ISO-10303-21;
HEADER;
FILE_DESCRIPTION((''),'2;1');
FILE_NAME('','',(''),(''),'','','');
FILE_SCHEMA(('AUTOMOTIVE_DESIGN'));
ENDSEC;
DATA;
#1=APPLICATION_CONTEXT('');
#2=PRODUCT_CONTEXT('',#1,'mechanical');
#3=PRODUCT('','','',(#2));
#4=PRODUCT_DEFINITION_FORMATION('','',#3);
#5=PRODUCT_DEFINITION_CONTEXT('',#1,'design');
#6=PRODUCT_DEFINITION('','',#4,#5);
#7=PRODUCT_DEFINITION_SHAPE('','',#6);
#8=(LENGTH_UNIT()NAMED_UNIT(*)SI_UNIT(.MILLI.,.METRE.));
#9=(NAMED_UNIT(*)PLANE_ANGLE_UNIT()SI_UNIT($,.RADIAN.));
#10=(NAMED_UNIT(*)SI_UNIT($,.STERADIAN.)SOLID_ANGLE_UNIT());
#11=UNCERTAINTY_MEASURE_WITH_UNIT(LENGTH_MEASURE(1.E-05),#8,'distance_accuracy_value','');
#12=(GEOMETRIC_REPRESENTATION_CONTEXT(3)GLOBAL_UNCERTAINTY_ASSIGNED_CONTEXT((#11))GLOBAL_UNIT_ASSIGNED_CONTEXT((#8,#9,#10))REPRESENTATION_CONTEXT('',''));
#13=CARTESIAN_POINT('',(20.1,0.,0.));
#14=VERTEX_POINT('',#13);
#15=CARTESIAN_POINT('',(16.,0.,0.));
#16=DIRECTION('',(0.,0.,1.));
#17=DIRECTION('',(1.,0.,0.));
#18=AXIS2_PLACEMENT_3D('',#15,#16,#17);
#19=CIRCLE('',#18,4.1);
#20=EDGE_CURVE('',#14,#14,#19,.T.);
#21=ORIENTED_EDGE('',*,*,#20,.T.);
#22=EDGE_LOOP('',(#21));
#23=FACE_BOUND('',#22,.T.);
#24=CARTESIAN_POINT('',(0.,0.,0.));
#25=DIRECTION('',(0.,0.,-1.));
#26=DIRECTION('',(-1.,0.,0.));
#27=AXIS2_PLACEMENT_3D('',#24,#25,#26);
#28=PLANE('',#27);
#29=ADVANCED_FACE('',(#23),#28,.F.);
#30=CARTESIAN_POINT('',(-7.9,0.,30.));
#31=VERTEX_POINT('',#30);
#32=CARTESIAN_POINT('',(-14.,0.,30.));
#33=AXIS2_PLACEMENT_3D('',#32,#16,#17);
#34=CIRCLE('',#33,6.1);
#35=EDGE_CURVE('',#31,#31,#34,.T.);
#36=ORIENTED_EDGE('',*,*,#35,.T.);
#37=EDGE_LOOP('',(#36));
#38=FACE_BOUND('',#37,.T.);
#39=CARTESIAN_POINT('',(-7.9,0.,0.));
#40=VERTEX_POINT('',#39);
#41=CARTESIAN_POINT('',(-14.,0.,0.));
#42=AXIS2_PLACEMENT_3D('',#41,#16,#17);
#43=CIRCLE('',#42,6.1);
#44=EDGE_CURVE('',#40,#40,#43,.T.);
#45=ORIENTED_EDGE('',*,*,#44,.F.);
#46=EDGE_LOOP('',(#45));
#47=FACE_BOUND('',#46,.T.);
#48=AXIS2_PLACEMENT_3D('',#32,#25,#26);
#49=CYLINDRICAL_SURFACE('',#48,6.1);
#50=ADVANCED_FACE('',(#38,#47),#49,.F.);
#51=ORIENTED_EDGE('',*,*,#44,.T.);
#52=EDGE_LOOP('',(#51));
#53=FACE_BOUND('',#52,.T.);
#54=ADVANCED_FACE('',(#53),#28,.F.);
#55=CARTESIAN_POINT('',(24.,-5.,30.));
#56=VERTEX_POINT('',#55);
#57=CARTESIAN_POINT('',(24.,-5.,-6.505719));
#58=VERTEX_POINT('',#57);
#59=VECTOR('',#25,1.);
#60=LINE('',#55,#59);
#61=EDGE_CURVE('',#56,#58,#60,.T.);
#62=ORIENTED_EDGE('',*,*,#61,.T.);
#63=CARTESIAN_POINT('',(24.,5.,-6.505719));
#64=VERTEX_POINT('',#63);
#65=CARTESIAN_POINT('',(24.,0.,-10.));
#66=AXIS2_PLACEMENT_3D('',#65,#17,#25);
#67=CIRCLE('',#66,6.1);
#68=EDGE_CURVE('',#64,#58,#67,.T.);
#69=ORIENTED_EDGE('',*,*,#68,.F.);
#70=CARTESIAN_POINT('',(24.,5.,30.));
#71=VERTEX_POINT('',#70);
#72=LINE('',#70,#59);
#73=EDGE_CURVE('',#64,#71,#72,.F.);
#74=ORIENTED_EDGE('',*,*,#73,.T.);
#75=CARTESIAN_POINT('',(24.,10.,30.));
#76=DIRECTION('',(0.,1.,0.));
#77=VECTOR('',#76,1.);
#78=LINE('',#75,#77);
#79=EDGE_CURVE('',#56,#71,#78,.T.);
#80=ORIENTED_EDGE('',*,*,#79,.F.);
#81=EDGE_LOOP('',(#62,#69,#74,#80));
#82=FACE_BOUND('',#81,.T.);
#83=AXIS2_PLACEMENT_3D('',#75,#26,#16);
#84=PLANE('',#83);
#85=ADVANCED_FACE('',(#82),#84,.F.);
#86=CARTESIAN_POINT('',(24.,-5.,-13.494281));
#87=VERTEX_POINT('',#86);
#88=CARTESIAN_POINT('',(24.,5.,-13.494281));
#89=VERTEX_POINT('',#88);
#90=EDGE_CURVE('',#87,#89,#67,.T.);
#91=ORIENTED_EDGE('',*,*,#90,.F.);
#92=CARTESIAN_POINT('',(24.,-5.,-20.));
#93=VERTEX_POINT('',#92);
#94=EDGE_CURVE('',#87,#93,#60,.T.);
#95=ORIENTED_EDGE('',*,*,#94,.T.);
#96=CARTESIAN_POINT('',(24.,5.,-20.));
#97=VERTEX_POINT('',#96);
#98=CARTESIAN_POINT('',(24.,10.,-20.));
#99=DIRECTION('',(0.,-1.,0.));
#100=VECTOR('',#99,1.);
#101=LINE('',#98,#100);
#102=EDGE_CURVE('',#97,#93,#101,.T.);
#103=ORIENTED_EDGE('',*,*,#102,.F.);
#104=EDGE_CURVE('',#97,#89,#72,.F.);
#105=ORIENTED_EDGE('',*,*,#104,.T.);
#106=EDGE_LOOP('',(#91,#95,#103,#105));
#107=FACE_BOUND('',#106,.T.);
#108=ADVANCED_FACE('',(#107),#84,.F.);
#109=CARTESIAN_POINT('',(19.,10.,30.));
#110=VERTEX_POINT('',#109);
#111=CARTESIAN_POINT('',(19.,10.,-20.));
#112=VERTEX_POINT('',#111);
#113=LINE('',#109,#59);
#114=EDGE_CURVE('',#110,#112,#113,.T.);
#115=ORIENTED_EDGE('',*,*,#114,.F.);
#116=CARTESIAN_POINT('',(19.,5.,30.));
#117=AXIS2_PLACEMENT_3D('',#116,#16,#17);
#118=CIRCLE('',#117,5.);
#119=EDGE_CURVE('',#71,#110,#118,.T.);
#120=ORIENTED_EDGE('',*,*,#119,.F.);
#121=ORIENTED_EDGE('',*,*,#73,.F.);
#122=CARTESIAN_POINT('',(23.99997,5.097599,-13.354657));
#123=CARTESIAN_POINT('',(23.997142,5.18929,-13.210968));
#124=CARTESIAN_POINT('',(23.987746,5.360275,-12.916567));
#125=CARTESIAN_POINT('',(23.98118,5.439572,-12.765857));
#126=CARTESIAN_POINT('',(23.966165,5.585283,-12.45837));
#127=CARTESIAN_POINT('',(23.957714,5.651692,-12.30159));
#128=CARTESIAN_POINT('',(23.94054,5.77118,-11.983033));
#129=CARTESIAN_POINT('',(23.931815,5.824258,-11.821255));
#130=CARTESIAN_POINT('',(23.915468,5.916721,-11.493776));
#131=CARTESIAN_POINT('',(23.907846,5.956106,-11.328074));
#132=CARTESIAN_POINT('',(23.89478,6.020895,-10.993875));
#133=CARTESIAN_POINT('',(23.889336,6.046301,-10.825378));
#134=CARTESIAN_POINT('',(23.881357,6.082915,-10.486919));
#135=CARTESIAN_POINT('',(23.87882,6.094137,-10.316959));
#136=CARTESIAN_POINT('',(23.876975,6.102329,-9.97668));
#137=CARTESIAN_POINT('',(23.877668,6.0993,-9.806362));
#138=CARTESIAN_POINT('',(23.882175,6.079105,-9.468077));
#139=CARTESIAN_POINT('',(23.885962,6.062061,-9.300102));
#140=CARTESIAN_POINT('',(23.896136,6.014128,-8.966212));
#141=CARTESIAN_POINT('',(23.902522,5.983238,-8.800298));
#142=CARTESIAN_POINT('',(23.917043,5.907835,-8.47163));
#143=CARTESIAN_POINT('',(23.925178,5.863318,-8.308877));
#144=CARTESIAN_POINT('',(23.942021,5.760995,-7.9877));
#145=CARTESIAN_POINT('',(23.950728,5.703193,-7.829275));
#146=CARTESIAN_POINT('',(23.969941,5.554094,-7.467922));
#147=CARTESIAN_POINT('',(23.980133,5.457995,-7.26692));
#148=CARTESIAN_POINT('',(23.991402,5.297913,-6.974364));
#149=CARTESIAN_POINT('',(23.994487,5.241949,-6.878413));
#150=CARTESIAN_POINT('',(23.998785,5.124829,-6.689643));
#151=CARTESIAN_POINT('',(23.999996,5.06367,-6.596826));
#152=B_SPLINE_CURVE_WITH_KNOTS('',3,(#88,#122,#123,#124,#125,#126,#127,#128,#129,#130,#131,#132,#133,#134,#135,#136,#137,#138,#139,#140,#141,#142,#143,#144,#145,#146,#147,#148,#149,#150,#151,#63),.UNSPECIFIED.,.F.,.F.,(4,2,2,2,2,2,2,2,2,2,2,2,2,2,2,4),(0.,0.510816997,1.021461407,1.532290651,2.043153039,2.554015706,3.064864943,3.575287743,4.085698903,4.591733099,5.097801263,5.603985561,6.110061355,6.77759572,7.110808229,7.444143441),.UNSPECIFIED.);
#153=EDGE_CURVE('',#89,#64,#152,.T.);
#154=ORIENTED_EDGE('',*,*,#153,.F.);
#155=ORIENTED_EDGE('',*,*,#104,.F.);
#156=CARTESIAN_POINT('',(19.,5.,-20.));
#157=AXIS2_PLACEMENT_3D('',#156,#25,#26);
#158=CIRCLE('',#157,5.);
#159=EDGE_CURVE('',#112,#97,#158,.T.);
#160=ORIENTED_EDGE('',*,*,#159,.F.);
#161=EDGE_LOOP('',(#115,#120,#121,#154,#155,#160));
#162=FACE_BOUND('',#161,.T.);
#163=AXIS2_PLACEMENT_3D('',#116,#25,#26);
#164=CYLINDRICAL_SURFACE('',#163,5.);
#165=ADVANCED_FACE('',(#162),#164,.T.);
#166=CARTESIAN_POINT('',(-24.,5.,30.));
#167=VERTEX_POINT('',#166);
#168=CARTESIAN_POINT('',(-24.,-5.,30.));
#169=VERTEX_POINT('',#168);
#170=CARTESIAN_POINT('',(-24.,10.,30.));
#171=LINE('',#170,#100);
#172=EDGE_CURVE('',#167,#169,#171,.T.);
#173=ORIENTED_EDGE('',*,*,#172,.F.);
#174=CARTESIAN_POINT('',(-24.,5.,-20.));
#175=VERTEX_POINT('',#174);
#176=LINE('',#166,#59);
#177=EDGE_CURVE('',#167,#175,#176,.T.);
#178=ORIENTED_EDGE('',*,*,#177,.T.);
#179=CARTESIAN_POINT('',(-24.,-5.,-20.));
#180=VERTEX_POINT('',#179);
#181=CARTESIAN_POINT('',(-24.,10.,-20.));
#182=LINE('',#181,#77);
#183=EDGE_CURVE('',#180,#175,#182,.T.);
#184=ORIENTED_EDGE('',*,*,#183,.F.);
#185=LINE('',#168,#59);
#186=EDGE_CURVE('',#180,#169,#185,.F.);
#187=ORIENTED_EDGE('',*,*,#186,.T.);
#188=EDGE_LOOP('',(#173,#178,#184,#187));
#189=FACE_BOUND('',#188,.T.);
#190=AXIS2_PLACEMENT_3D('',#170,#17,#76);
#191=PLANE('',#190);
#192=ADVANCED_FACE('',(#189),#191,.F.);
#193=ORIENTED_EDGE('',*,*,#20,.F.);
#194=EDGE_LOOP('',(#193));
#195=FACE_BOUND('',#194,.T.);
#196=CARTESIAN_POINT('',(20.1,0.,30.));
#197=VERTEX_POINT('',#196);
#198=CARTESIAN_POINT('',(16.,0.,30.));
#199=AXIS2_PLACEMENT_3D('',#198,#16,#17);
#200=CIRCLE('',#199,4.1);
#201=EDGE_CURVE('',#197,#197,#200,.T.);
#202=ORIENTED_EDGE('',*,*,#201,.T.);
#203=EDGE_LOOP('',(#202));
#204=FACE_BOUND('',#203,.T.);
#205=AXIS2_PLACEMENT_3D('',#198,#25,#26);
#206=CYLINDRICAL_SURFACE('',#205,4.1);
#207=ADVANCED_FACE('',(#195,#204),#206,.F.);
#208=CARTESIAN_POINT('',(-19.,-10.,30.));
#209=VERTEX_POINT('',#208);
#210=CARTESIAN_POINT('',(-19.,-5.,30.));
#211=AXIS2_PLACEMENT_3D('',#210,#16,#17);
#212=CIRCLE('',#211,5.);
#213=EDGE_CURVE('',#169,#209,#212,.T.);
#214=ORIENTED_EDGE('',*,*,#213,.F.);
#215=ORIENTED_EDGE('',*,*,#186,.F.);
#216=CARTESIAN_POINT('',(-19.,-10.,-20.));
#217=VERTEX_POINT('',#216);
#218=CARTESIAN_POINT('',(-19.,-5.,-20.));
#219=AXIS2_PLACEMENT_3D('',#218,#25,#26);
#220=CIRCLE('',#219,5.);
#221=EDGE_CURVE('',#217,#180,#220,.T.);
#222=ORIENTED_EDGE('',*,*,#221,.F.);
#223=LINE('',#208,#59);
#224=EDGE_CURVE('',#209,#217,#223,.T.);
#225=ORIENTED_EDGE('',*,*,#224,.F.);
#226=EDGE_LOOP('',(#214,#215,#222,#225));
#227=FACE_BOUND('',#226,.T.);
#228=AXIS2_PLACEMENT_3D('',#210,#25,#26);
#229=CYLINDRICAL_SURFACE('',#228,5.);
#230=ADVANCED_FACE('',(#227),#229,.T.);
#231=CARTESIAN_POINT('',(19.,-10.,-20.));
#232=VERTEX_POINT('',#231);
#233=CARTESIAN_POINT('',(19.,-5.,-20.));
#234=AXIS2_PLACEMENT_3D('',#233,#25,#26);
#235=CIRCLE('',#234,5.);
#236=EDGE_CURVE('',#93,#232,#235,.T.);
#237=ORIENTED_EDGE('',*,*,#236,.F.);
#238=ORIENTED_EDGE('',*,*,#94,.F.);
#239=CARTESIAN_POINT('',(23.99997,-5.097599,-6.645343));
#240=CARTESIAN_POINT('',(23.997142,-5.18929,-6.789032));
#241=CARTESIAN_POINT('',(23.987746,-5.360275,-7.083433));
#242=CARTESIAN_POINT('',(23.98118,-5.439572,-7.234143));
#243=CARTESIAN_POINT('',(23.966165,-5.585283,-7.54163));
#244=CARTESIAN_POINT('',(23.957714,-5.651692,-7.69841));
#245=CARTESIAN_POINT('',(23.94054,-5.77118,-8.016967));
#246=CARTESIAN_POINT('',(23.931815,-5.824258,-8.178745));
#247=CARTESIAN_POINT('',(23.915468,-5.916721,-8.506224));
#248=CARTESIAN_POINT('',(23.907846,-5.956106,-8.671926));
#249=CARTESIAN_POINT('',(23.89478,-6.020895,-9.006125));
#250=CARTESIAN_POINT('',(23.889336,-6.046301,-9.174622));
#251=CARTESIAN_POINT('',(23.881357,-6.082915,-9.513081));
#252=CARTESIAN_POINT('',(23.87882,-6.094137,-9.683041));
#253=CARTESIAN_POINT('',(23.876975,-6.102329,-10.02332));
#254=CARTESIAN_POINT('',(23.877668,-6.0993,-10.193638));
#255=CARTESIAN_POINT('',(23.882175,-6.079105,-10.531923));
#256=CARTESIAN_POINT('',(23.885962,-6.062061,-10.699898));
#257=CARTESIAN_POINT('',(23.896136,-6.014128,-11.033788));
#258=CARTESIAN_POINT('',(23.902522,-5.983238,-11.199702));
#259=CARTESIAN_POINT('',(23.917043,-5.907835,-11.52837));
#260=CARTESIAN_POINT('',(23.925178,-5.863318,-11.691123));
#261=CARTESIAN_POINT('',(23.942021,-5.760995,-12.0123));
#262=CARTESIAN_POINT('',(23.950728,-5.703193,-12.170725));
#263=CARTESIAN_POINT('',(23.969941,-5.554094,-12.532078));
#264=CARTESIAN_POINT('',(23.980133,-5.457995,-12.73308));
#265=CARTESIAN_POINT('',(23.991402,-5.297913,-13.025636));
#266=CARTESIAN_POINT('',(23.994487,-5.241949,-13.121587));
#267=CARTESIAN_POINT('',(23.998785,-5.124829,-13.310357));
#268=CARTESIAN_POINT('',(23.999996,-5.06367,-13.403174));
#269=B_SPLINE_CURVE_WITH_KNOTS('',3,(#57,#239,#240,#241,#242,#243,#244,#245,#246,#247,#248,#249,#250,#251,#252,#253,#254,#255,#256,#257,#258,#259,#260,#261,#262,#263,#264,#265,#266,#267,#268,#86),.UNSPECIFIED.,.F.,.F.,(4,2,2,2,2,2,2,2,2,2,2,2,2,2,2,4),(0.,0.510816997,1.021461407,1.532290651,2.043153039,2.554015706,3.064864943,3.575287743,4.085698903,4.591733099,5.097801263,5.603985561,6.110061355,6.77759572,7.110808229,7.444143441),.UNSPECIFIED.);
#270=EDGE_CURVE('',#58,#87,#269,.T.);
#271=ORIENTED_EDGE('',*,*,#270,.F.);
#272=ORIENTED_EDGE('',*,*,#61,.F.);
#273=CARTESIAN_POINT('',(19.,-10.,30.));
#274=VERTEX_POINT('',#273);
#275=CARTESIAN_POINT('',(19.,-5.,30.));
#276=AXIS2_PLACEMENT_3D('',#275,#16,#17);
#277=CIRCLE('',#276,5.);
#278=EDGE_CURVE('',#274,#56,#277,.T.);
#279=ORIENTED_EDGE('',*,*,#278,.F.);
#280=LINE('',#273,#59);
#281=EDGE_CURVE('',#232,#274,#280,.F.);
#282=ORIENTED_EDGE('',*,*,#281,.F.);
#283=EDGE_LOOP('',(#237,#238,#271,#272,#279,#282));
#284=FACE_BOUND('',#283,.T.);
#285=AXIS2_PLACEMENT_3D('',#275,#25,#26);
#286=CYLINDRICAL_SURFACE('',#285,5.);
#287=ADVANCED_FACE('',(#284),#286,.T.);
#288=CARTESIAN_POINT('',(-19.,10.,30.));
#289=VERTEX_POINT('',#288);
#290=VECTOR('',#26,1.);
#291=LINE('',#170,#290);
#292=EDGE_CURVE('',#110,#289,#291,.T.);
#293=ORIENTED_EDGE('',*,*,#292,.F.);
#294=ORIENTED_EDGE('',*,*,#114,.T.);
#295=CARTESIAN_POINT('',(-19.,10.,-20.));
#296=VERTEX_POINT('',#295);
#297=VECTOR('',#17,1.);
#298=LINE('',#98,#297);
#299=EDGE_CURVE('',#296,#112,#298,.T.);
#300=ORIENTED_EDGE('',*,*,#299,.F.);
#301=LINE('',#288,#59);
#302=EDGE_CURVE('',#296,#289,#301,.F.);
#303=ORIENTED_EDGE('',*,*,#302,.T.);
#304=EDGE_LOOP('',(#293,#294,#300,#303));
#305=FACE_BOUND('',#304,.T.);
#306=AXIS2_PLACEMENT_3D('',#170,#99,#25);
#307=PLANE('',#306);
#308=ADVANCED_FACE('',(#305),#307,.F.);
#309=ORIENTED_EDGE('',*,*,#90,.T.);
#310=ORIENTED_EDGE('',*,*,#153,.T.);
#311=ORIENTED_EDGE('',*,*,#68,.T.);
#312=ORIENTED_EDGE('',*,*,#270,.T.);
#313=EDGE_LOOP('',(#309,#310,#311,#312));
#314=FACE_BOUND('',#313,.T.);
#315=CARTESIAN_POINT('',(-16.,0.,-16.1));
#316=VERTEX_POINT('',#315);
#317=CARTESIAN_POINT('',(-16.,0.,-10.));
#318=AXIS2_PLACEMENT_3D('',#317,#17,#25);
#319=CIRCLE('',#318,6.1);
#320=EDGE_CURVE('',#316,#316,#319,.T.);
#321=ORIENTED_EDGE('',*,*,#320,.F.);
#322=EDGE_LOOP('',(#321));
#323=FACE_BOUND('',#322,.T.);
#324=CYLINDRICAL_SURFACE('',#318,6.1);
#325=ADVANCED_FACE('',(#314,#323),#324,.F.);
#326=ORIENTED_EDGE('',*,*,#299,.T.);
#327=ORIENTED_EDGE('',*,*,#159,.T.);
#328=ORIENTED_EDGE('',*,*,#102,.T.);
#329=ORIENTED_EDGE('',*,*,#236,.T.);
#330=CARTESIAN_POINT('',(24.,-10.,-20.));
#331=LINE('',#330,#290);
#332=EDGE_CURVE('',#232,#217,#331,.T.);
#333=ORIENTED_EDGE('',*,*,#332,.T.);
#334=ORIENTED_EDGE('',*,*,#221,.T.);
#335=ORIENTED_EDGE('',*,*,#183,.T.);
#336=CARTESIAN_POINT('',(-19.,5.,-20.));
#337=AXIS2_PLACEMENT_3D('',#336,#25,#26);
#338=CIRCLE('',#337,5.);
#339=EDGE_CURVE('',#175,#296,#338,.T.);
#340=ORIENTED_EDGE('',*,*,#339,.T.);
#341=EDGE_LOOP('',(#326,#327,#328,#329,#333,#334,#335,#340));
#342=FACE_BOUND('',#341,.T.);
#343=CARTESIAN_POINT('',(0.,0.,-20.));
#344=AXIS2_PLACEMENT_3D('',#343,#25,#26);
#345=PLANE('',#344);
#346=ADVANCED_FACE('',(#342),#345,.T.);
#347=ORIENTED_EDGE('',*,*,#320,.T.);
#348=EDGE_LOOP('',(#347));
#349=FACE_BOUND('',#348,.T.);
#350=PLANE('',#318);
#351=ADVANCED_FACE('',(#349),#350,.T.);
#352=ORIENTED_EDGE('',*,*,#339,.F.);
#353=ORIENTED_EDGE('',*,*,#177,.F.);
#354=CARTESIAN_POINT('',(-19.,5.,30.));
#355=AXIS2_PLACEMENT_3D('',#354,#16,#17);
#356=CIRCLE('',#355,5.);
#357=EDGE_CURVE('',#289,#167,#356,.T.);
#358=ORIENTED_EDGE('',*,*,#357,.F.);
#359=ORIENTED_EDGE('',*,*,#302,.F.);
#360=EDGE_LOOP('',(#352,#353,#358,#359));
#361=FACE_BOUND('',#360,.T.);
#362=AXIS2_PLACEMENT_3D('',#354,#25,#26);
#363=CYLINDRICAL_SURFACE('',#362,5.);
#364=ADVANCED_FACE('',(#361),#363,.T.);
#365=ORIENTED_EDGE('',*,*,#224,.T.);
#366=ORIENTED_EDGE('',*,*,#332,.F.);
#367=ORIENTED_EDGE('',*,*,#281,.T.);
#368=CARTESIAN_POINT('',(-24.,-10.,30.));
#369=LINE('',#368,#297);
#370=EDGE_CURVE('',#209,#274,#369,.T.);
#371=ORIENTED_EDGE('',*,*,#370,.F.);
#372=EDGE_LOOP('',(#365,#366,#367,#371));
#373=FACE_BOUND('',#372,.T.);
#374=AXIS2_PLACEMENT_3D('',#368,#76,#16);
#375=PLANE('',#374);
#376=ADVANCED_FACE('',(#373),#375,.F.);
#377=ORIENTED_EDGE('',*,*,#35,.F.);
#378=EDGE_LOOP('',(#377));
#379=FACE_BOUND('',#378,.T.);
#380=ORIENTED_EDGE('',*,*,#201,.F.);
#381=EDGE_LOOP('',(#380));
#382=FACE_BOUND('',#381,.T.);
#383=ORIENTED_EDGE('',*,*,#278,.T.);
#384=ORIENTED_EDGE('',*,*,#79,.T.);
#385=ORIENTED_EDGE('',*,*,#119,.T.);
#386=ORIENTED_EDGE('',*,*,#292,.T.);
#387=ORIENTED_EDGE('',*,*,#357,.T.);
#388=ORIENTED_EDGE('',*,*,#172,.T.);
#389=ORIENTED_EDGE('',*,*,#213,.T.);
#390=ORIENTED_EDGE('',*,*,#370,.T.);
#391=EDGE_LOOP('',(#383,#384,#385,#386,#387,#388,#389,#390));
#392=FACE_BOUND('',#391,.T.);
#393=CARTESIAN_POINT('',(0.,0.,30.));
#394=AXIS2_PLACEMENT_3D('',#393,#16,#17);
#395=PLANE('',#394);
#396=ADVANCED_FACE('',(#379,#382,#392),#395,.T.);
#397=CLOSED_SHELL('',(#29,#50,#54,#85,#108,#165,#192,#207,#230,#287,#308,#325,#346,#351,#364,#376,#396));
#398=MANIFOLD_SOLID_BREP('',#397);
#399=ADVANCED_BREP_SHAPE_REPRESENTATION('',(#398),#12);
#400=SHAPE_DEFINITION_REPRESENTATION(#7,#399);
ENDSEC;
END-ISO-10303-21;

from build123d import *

# Parameters (mm, degrees)
SKETCH1_W           = 48
SKETCH1_H           = 20
SKETCH1_R           = 6.1
SKETCH1_R_2         = 4.1
BOSS_EXTRUDE1_DEPTH = 30
SKETCH2_W           = 48
SKETCH2_H           = 20
BOSS_EXTRUDE2_DEPTH = 20
SKETCH3_R           = 6.1
CUT_EXTRUDE1_DEPTH  = 40
FILLET1_R           = 5


with BuildPart() as part:
    # Sketch1 → Boss-Extrude1 (new body)
    with BuildSketch(Plane.XY):
        Rectangle(SKETCH1_W, SKETCH1_H)
        with Locations((-14, 0)):
            Circle(SKETCH1_R, mode=Mode.SUBTRACT)
        with Locations((16, 0)):
            Circle(SKETCH1_R_2, mode=Mode.SUBTRACT)
    extrude(amount=BOSS_EXTRUDE1_DEPTH)

    # Sketch2 → Boss-Extrude2 (add)
    with BuildSketch(Plane(origin=(0, 0, 0), x_dir=(-1, 0, 0), z_dir=(0, 0, -1))):
        Rectangle(SKETCH2_W, SKETCH2_H)
    extrude(amount=BOSS_EXTRUDE2_DEPTH)

    # Sketch3 → Cut-Extrude1 (cut)
    with BuildSketch(Plane(origin=(24, 0, 0), x_dir=(0, 0, -1), z_dir=(1, 0, 0))):
        with Locations((10, 0)):
            Circle(SKETCH3_R)
    extrude(amount=-CUT_EXTRUDE1_DEPTH, mode=Mode.SUBTRACT)

    # Fillet1
    # the kernel refuses this fillet: 5 mm, written as the material it takes off along each edge
    with BuildSketch(Plane(origin=(24, -10, 42.5), x_dir=(0, 1, 0), z_dir=(0, 0, -1)), Plane(origin=(-24, -10, -32.5), x_dir=(0, 1, 0), z_dir=(0, 0, 1)), Plane(origin=(-24, 10, -32.5), x_dir=(1, 0, 0), z_dir=(0, 0, 1)), Plane(origin=(24, 10, 42.5), x_dir=(-1, 0, 0), z_dir=(0, 0, -1))) as fillet1_piece_1:
        with BuildLine():
            CenterArc((FILLET1_R, -FILLET1_R), FILLET1_R, 90, 90)
            Line((0, -FILLET1_R), (0, 0))
            Line((0, 0), (FILLET1_R, 0))
        make_face()
    extrude(amount=75, mode=Mode.SUBTRACT)


solid = part.part
